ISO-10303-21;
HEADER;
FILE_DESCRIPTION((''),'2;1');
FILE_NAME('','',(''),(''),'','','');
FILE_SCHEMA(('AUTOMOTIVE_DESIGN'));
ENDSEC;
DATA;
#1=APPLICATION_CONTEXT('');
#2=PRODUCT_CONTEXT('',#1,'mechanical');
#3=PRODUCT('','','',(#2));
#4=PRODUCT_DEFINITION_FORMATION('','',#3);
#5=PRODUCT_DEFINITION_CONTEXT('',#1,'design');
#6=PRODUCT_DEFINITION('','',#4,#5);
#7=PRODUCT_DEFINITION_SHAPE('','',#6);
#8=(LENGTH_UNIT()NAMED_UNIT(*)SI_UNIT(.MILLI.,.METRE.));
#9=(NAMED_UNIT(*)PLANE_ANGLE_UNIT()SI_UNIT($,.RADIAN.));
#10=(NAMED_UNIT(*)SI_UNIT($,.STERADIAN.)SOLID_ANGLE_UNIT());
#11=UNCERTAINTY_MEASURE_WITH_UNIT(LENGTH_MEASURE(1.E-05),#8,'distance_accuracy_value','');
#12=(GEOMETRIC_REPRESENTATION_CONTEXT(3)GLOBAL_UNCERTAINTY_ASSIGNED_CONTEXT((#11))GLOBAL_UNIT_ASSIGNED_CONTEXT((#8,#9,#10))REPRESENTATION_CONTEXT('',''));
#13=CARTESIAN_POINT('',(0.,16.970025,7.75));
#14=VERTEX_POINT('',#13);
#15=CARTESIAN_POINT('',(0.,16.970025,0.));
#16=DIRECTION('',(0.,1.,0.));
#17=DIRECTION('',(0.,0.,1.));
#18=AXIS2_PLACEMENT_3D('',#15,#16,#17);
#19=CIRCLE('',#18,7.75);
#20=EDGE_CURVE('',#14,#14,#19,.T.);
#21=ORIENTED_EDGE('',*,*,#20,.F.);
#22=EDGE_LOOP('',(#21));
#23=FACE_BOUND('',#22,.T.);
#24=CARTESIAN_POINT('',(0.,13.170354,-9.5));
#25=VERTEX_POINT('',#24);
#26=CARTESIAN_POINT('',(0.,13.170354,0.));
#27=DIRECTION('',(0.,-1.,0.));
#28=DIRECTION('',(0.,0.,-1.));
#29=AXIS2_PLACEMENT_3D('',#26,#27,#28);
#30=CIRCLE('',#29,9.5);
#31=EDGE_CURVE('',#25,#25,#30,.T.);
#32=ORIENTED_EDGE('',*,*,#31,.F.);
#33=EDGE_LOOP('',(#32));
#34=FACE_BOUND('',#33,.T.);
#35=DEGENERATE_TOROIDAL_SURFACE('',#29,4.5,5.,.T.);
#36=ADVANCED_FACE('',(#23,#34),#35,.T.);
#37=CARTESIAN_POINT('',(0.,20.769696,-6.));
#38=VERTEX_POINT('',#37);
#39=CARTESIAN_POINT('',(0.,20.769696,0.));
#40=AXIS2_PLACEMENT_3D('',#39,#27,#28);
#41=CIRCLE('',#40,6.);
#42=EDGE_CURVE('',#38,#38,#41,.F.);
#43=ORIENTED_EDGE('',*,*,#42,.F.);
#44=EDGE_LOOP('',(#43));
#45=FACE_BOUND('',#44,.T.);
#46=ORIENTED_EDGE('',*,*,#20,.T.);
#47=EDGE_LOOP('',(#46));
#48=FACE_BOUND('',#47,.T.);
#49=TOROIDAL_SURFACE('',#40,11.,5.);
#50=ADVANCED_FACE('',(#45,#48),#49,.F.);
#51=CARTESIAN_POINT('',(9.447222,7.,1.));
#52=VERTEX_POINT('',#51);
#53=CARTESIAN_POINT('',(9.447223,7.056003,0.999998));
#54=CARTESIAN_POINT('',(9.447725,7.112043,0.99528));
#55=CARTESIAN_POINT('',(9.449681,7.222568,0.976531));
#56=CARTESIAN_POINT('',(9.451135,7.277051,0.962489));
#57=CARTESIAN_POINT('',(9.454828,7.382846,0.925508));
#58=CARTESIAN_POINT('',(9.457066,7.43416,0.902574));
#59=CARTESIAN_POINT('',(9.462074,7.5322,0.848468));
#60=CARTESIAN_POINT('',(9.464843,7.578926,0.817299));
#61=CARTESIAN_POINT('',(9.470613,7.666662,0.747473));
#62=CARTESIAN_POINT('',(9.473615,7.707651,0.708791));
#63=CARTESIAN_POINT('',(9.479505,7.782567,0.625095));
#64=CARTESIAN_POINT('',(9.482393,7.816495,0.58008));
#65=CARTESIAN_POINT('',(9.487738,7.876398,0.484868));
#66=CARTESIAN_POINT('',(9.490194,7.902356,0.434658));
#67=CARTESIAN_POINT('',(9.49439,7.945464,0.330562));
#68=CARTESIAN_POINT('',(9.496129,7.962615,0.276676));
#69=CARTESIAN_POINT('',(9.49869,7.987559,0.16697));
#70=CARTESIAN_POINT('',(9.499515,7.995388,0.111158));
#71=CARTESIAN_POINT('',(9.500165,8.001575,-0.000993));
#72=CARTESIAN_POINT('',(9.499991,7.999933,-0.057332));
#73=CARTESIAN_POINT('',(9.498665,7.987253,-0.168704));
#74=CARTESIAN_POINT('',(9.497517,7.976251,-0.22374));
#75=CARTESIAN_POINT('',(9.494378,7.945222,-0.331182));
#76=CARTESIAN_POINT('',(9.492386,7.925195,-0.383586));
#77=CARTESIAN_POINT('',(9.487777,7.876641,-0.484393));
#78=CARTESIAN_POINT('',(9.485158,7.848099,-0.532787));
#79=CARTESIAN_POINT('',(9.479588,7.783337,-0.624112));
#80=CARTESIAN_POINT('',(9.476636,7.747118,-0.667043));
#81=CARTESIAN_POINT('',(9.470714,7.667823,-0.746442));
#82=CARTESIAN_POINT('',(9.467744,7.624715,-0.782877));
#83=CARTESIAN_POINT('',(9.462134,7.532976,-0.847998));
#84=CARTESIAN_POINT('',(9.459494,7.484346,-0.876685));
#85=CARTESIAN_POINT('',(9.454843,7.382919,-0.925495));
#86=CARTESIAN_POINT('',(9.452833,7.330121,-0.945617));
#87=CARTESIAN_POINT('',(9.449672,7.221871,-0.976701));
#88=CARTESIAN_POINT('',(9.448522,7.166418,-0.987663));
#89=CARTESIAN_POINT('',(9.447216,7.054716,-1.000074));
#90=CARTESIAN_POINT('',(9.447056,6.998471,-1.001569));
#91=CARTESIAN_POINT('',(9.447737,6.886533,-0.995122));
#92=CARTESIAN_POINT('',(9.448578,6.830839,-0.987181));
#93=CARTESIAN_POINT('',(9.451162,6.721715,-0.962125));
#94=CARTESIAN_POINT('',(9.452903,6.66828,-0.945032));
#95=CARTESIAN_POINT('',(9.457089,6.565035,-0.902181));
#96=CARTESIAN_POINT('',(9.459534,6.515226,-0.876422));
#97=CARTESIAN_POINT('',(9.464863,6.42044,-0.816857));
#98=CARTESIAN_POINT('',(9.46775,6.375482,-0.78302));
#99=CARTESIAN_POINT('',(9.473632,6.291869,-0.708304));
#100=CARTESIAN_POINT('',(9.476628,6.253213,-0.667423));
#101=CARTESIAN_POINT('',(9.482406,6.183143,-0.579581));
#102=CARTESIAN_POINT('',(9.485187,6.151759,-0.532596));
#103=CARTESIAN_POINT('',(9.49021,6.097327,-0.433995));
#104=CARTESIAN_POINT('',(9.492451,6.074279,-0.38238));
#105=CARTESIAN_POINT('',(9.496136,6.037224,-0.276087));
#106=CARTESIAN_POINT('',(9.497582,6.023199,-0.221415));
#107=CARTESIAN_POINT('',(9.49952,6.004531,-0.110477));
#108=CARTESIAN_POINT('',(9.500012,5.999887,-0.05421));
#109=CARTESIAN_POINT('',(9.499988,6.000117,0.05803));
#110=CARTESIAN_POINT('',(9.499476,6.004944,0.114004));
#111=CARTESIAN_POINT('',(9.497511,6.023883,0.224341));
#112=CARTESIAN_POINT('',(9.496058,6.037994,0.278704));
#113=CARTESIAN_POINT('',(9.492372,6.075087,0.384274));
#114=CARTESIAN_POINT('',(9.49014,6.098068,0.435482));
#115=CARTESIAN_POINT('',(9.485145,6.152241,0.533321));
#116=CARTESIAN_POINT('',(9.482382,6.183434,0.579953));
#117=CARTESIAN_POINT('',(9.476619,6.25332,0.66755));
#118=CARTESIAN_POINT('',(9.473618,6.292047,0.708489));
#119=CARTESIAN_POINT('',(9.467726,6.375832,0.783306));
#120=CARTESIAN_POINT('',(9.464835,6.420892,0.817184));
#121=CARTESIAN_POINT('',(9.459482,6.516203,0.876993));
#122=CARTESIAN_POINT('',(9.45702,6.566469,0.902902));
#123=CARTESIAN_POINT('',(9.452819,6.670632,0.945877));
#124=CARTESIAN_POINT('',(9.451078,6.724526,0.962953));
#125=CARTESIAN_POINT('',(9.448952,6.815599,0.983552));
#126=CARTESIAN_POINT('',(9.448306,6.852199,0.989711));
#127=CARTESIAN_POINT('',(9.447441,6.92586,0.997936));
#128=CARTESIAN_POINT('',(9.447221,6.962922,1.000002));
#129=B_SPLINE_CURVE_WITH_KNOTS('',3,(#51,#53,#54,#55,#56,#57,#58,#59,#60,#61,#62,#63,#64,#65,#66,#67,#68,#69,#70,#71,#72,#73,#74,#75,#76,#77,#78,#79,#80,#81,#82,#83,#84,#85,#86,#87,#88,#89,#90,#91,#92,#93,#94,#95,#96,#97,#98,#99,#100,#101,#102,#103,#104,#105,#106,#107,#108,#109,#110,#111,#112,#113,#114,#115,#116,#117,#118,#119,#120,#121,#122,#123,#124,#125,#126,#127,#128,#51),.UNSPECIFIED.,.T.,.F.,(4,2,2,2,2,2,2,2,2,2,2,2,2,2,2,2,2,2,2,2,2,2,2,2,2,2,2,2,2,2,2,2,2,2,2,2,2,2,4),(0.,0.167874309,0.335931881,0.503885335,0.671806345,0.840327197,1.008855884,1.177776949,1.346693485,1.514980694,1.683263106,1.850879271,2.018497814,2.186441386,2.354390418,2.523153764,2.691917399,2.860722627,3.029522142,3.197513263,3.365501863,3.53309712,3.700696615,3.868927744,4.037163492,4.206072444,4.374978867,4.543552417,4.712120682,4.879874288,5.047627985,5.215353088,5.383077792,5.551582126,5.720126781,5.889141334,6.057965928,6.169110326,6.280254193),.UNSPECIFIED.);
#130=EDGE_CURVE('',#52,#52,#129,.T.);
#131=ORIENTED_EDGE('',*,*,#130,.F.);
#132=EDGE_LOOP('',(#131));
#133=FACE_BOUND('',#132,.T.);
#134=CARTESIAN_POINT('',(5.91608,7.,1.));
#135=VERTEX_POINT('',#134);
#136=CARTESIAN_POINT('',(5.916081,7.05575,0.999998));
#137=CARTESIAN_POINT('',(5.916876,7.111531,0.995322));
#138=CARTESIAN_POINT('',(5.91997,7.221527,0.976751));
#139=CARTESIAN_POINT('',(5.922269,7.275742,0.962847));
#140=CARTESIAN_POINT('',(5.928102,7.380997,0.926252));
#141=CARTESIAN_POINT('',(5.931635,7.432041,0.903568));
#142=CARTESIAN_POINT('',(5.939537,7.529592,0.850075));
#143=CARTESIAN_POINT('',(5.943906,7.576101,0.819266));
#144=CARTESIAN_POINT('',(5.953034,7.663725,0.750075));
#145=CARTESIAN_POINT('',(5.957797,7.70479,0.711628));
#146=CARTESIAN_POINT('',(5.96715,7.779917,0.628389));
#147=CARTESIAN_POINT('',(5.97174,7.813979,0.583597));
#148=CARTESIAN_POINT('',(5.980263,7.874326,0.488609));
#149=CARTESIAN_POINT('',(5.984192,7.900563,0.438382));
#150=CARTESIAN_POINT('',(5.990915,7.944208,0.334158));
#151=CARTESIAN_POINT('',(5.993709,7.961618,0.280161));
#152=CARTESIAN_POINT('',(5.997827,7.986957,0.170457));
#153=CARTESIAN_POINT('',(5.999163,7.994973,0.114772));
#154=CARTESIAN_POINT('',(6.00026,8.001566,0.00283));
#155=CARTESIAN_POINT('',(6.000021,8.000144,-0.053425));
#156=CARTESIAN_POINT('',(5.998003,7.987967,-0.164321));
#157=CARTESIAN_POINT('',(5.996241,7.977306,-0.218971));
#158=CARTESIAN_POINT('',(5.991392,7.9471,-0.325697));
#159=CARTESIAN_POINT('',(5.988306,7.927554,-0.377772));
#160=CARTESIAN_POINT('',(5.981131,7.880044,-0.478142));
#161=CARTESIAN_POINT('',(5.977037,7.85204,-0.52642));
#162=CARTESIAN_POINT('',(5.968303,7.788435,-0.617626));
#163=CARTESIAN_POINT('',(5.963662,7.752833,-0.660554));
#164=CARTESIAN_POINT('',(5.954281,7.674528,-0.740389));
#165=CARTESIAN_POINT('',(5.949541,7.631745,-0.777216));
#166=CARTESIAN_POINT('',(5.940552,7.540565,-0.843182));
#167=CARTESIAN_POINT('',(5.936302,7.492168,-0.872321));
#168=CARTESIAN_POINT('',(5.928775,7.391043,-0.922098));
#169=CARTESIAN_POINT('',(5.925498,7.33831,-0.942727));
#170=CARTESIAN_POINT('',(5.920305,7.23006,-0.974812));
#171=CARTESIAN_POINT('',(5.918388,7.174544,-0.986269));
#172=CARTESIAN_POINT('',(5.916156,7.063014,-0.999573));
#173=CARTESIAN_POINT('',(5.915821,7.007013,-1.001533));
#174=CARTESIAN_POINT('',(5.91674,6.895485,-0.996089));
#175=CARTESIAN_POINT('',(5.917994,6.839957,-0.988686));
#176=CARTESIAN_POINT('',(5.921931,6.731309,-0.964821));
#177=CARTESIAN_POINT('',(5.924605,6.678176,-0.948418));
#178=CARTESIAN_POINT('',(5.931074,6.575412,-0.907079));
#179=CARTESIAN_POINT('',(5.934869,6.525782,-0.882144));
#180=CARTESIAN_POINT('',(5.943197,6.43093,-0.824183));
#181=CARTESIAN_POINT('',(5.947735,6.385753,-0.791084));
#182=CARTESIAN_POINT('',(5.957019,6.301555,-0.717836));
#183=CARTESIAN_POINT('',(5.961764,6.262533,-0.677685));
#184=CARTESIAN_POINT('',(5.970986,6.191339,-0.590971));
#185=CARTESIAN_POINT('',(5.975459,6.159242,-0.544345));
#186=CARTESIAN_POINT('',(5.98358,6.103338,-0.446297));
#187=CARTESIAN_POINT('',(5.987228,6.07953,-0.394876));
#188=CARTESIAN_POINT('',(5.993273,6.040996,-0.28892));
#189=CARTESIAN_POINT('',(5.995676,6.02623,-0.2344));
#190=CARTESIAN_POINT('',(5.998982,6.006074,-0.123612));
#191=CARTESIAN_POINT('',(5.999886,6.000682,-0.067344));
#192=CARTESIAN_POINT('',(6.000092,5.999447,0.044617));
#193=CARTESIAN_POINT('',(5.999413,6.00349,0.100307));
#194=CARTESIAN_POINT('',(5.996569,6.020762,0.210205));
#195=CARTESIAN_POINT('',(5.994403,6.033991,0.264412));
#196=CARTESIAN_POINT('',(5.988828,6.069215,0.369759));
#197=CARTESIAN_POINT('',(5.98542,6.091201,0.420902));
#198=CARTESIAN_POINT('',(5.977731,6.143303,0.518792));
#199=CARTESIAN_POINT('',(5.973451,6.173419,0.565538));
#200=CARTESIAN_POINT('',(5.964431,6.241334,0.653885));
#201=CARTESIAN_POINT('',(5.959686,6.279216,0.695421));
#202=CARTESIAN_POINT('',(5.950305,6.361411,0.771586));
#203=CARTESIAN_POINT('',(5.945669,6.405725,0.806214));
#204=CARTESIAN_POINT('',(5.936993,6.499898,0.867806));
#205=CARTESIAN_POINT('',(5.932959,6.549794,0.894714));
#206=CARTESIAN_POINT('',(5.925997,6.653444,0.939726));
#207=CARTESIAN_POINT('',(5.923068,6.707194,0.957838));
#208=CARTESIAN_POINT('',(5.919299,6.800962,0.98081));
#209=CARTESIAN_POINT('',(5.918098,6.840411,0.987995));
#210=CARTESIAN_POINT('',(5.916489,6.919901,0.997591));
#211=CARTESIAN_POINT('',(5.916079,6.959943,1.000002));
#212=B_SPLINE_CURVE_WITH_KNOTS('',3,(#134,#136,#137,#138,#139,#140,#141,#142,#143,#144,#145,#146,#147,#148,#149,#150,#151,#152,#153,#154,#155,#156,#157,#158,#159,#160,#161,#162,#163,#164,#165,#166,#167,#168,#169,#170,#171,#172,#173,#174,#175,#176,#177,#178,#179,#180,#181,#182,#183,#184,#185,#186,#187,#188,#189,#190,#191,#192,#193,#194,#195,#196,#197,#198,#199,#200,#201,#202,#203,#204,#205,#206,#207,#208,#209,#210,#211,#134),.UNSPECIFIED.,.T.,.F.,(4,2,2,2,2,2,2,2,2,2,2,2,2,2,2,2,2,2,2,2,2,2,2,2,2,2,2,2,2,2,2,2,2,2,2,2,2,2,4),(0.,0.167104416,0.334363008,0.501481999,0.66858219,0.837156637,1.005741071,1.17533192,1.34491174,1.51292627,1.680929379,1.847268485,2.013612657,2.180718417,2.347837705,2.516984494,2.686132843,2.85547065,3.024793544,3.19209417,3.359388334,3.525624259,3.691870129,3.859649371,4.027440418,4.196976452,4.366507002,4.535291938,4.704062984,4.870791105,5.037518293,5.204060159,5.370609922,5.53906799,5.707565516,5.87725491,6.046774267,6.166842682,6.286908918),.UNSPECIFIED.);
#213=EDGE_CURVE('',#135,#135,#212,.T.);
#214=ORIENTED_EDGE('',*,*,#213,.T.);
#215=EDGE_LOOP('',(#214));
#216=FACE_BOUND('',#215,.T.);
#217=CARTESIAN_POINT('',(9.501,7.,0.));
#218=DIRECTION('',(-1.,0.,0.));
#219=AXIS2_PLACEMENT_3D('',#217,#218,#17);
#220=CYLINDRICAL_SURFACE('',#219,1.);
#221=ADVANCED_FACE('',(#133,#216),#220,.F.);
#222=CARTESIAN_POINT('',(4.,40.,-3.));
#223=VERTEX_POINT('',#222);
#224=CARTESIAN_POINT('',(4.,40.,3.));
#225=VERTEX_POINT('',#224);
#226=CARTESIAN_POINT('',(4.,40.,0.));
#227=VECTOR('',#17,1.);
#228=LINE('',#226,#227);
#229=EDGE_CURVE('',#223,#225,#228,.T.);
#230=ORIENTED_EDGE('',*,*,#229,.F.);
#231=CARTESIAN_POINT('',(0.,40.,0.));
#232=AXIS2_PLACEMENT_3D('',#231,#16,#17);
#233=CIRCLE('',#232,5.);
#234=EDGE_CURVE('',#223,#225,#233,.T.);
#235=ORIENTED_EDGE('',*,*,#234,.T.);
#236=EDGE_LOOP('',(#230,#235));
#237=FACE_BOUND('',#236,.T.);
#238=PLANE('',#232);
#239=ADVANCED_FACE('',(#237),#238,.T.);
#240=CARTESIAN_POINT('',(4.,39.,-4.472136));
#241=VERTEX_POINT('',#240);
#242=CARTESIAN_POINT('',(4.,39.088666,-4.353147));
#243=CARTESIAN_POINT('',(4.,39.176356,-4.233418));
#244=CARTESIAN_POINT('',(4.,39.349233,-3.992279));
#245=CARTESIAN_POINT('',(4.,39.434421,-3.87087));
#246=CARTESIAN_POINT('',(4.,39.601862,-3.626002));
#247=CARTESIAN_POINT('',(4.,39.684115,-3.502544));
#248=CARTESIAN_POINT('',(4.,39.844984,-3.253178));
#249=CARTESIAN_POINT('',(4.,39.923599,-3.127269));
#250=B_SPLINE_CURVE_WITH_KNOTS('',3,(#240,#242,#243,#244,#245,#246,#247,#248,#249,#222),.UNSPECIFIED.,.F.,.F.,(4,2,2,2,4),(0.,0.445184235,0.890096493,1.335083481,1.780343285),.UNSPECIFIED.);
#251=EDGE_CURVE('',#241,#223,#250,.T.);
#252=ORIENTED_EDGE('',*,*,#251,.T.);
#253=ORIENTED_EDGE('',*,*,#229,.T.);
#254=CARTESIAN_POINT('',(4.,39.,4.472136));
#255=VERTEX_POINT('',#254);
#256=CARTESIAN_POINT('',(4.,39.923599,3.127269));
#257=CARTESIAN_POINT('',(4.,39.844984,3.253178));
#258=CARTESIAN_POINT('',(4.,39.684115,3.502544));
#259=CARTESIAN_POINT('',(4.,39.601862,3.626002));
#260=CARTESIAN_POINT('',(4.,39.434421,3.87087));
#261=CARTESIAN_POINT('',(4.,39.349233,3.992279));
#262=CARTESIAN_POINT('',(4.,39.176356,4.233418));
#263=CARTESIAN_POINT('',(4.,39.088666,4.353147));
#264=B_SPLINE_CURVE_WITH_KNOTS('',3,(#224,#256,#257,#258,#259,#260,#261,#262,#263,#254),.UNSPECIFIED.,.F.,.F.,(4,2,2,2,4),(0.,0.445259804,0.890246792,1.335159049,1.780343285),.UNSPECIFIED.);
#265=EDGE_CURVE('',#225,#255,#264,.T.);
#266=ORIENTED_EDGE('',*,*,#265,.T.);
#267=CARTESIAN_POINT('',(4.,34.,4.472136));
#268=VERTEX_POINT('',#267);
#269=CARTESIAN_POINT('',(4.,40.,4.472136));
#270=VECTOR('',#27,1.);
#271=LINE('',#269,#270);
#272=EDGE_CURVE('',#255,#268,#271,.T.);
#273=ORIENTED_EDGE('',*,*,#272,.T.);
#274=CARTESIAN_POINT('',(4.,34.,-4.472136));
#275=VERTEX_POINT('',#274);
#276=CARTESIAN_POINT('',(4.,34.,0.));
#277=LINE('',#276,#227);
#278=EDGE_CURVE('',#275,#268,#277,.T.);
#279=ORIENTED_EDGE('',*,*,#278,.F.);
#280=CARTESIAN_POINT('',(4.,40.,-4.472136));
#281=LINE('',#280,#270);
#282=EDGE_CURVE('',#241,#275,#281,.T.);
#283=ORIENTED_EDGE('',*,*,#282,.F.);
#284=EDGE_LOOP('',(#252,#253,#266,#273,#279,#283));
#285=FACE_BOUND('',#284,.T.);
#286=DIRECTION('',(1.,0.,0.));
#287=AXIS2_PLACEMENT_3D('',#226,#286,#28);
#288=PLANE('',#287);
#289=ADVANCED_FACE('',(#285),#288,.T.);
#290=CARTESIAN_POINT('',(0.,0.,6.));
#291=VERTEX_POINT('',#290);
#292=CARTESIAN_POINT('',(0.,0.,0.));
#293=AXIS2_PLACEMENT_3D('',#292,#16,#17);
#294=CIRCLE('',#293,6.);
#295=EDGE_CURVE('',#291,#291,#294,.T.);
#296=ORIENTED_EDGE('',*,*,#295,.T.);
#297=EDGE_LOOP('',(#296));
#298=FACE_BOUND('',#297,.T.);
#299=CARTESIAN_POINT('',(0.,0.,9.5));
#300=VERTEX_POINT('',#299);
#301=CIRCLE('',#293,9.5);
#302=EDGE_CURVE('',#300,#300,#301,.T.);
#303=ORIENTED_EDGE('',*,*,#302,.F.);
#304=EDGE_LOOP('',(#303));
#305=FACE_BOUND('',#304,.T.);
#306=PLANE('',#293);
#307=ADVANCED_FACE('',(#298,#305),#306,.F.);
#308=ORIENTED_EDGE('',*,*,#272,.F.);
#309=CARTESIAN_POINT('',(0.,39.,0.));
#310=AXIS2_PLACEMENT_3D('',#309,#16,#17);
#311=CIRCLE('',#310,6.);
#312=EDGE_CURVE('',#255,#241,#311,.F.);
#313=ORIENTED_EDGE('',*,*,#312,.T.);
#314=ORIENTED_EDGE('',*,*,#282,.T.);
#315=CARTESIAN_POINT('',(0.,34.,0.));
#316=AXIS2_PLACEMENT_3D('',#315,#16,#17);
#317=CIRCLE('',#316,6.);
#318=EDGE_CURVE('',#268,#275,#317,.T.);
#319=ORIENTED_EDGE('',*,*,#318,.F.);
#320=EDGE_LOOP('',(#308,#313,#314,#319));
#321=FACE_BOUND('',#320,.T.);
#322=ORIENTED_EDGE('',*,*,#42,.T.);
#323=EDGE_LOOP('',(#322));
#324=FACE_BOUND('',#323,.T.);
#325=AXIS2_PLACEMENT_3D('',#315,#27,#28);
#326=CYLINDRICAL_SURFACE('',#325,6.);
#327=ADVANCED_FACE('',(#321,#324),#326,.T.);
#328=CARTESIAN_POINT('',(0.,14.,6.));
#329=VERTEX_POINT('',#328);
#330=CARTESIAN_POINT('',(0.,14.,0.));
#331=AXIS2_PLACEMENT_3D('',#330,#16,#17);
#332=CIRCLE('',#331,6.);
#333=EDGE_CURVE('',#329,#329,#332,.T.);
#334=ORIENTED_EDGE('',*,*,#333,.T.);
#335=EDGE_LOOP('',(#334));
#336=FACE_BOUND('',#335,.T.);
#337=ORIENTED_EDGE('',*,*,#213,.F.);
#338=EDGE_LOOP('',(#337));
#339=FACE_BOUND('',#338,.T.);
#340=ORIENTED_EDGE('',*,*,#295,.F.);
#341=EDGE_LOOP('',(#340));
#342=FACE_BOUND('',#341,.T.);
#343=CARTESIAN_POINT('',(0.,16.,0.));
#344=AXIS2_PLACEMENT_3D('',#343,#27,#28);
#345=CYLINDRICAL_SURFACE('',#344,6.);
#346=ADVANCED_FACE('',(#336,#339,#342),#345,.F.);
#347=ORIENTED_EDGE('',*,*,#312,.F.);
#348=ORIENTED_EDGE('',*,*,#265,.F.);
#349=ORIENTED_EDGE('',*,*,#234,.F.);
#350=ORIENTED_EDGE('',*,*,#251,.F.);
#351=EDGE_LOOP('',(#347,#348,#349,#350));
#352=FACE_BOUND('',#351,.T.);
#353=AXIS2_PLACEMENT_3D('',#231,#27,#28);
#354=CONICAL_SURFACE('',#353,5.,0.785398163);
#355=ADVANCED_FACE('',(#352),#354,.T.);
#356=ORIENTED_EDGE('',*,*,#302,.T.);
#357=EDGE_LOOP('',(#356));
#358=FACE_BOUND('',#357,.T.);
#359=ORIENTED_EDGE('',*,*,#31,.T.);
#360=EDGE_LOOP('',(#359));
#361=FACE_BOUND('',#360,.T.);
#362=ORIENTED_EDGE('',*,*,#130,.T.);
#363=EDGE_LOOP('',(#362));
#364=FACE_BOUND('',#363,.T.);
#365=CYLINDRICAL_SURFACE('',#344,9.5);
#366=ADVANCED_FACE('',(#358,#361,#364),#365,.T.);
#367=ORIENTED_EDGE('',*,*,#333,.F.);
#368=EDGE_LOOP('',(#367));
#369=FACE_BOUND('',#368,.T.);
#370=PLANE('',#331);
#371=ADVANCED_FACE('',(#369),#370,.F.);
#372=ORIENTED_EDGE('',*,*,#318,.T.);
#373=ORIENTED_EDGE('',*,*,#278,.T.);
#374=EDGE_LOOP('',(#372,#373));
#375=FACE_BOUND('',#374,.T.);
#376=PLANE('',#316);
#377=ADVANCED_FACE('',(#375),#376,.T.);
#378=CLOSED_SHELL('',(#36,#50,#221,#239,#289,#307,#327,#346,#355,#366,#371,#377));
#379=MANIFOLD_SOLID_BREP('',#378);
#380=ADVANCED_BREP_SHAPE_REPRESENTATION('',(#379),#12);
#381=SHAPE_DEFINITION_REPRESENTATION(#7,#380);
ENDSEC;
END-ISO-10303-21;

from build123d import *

# Parameters (mm, degrees)
SKETCH1_R               = 9.5
SKETCH1_R_2             = 6
BOSS_EXTRUDE1_DEPTH     = 16
BOSS_EXTRUDE2_START     = 14
BOSS_EXTRUDE2_DEPTH     = 26
BOSS_EXTRUDE5_START     = 14
BOSS_EXTRUDE5_DEPTH     = 20
CUT_EXTRUDE1_REACH      = 44.196
CUT_EXTRUDE1_END_RADIUS = 9.5
SKETCH2_R               = 1
CHAMFER1_SIZE           = 1
FILLET2_R               = 5
FILLET3_R               = 5


with BuildPart() as part:
    # Sketch1 → Boss-Extrude1 (new body)
    with BuildSketch(Plane(origin=(0, 0, 0), x_dir=(1, 0, 0), z_dir=(0, 1, 0))):
        with Locations(Location((0, 0, 0), (0, 0, 270))):
            Circle(SKETCH1_R)
        with Locations(Location((0, 0, 0), (0, 0, 270))):
            Circle(SKETCH1_R_2, mode=Mode.SUBTRACT)
    extrude(amount=BOSS_EXTRUDE1_DEPTH)



with BuildPart() as body_2:
    # Sketch1<3> → Boss-Extrude2 (new body)
    with BuildSketch(Plane(origin=(0, 0, 0), x_dir=(1, 0, 0), z_dir=(0, 1, 0)).offset(BOSS_EXTRUDE2_START)):
        with BuildLine():
            Line((4, -4.472135955), (4, 4.472135955))
            ThreePointArc((4, 4.472135955), (-6, 0), (4, -4.472135955))
        make_face()
    extrude(amount=BOSS_EXTRUDE2_DEPTH)


with BuildPart() as part_1:
    add(part.part)

    add(body_2.part)  # Boss-Extrude5 merges body 2
    # Sketch1<5> → Boss-Extrude5 (add)
    with BuildSketch(Plane(origin=(0, 0, 0), x_dir=(1, 0, 0), z_dir=(0, 1, 0)).offset(BOSS_EXTRUDE5_START)):
        with BuildLine():
            ThreePointArc((6, 0), (5.477225575, 2.449489743), (4, 4.472135955))
            Line((4, 4.472135955), (4, -4.472135955))
            ThreePointArc((4, -4.472135955), (5.477225575, -2.449489743), (6, 0))
        make_face()
        with BuildLine():
            Line((4, -4.472135955), (4, 4.472135955))
            ThreePointArc((4, 4.472135955), (-6, 0), (4, -4.472135955))
        make_face()
    extrude(amount=BOSS_EXTRUDE5_DEPTH)

    # Cut-Extrude1: up to this cylinder (the profile starts inside it)
    cut_extrude1_end = Plane(origin=(0, 7, 0), z_dir=(0, -1, 0)) * Cylinder(CUT_EXTRUDE1_END_RADIUS, 108.392, mode=Mode.PRIVATE)
    # Sketch2 → Cut-Extrude1 (cut, up to the surface)
    with BuildSketch(Plane(origin=(0, 0, 0), x_dir=(0, 0, -1), z_dir=(1, 0, 0)), mode=Mode.PRIVATE) as cut_extrude1_sk1:
        with Locations(Location((0, 7, 0), (0, 0, 180))):
            Circle(SKETCH2_R)
    cut_extrude1_tool1 = extrude(cut_extrude1_sk1.sketch, amount=CUT_EXTRUDE1_REACH, mode=Mode.PRIVATE) & cut_extrude1_end
    add(cut_extrude1_tool1.solids().sort_by_distance((0, 7, 0))[0], mode=Mode.SUBTRACT)

    # Chamfer1
    chamfer1_edges = [part_1.edges().sort_by_distance(p)[0] for p in [
        (-6, 40, 0),
    ]]
    chamfer(chamfer1_edges, length=CHAMFER1_SIZE)

    # Fillet2
    # the kernel refuses this fillet: 5 mm, written as the material it adds along each edge
    with BuildSketch(Plane(origin=(0, 16, 0), x_dir=(0.6666666666667012, 0, -0.745355992499899), z_dir=(-0.745355992499899, 0, -0.6666666666667012))) as fillet2_piece_1:
        with BuildLine():
            CenterArc((11, -4.769696007), FILLET2_R, 107.457603124, 72.542396876)
            Line((9.5, 0), (9.47, 0.09539392))
            ThreePointArc((9.47, 0.09539392), (7.75, 0.1), (6, 0.1))
            Line((6, 0.1), (5.9, 0))
            Line((5.9, 0), (5.9, -4.769696007))
            Line((5.9, -4.769696007), (6, -4.769696007))
        make_face()
    revolve(axis=Axis((0, 16, 0), (0, -1, 0)))

    # Fillet3
    fillet3_edges = [part_1.edges().sort_by_distance(p)[0] for p in [
        (8.87463741, 16, 3.389809853),
    ]]
    fillet(fillet3_edges, radius=FILLET3_R)


solid = part_1.part
